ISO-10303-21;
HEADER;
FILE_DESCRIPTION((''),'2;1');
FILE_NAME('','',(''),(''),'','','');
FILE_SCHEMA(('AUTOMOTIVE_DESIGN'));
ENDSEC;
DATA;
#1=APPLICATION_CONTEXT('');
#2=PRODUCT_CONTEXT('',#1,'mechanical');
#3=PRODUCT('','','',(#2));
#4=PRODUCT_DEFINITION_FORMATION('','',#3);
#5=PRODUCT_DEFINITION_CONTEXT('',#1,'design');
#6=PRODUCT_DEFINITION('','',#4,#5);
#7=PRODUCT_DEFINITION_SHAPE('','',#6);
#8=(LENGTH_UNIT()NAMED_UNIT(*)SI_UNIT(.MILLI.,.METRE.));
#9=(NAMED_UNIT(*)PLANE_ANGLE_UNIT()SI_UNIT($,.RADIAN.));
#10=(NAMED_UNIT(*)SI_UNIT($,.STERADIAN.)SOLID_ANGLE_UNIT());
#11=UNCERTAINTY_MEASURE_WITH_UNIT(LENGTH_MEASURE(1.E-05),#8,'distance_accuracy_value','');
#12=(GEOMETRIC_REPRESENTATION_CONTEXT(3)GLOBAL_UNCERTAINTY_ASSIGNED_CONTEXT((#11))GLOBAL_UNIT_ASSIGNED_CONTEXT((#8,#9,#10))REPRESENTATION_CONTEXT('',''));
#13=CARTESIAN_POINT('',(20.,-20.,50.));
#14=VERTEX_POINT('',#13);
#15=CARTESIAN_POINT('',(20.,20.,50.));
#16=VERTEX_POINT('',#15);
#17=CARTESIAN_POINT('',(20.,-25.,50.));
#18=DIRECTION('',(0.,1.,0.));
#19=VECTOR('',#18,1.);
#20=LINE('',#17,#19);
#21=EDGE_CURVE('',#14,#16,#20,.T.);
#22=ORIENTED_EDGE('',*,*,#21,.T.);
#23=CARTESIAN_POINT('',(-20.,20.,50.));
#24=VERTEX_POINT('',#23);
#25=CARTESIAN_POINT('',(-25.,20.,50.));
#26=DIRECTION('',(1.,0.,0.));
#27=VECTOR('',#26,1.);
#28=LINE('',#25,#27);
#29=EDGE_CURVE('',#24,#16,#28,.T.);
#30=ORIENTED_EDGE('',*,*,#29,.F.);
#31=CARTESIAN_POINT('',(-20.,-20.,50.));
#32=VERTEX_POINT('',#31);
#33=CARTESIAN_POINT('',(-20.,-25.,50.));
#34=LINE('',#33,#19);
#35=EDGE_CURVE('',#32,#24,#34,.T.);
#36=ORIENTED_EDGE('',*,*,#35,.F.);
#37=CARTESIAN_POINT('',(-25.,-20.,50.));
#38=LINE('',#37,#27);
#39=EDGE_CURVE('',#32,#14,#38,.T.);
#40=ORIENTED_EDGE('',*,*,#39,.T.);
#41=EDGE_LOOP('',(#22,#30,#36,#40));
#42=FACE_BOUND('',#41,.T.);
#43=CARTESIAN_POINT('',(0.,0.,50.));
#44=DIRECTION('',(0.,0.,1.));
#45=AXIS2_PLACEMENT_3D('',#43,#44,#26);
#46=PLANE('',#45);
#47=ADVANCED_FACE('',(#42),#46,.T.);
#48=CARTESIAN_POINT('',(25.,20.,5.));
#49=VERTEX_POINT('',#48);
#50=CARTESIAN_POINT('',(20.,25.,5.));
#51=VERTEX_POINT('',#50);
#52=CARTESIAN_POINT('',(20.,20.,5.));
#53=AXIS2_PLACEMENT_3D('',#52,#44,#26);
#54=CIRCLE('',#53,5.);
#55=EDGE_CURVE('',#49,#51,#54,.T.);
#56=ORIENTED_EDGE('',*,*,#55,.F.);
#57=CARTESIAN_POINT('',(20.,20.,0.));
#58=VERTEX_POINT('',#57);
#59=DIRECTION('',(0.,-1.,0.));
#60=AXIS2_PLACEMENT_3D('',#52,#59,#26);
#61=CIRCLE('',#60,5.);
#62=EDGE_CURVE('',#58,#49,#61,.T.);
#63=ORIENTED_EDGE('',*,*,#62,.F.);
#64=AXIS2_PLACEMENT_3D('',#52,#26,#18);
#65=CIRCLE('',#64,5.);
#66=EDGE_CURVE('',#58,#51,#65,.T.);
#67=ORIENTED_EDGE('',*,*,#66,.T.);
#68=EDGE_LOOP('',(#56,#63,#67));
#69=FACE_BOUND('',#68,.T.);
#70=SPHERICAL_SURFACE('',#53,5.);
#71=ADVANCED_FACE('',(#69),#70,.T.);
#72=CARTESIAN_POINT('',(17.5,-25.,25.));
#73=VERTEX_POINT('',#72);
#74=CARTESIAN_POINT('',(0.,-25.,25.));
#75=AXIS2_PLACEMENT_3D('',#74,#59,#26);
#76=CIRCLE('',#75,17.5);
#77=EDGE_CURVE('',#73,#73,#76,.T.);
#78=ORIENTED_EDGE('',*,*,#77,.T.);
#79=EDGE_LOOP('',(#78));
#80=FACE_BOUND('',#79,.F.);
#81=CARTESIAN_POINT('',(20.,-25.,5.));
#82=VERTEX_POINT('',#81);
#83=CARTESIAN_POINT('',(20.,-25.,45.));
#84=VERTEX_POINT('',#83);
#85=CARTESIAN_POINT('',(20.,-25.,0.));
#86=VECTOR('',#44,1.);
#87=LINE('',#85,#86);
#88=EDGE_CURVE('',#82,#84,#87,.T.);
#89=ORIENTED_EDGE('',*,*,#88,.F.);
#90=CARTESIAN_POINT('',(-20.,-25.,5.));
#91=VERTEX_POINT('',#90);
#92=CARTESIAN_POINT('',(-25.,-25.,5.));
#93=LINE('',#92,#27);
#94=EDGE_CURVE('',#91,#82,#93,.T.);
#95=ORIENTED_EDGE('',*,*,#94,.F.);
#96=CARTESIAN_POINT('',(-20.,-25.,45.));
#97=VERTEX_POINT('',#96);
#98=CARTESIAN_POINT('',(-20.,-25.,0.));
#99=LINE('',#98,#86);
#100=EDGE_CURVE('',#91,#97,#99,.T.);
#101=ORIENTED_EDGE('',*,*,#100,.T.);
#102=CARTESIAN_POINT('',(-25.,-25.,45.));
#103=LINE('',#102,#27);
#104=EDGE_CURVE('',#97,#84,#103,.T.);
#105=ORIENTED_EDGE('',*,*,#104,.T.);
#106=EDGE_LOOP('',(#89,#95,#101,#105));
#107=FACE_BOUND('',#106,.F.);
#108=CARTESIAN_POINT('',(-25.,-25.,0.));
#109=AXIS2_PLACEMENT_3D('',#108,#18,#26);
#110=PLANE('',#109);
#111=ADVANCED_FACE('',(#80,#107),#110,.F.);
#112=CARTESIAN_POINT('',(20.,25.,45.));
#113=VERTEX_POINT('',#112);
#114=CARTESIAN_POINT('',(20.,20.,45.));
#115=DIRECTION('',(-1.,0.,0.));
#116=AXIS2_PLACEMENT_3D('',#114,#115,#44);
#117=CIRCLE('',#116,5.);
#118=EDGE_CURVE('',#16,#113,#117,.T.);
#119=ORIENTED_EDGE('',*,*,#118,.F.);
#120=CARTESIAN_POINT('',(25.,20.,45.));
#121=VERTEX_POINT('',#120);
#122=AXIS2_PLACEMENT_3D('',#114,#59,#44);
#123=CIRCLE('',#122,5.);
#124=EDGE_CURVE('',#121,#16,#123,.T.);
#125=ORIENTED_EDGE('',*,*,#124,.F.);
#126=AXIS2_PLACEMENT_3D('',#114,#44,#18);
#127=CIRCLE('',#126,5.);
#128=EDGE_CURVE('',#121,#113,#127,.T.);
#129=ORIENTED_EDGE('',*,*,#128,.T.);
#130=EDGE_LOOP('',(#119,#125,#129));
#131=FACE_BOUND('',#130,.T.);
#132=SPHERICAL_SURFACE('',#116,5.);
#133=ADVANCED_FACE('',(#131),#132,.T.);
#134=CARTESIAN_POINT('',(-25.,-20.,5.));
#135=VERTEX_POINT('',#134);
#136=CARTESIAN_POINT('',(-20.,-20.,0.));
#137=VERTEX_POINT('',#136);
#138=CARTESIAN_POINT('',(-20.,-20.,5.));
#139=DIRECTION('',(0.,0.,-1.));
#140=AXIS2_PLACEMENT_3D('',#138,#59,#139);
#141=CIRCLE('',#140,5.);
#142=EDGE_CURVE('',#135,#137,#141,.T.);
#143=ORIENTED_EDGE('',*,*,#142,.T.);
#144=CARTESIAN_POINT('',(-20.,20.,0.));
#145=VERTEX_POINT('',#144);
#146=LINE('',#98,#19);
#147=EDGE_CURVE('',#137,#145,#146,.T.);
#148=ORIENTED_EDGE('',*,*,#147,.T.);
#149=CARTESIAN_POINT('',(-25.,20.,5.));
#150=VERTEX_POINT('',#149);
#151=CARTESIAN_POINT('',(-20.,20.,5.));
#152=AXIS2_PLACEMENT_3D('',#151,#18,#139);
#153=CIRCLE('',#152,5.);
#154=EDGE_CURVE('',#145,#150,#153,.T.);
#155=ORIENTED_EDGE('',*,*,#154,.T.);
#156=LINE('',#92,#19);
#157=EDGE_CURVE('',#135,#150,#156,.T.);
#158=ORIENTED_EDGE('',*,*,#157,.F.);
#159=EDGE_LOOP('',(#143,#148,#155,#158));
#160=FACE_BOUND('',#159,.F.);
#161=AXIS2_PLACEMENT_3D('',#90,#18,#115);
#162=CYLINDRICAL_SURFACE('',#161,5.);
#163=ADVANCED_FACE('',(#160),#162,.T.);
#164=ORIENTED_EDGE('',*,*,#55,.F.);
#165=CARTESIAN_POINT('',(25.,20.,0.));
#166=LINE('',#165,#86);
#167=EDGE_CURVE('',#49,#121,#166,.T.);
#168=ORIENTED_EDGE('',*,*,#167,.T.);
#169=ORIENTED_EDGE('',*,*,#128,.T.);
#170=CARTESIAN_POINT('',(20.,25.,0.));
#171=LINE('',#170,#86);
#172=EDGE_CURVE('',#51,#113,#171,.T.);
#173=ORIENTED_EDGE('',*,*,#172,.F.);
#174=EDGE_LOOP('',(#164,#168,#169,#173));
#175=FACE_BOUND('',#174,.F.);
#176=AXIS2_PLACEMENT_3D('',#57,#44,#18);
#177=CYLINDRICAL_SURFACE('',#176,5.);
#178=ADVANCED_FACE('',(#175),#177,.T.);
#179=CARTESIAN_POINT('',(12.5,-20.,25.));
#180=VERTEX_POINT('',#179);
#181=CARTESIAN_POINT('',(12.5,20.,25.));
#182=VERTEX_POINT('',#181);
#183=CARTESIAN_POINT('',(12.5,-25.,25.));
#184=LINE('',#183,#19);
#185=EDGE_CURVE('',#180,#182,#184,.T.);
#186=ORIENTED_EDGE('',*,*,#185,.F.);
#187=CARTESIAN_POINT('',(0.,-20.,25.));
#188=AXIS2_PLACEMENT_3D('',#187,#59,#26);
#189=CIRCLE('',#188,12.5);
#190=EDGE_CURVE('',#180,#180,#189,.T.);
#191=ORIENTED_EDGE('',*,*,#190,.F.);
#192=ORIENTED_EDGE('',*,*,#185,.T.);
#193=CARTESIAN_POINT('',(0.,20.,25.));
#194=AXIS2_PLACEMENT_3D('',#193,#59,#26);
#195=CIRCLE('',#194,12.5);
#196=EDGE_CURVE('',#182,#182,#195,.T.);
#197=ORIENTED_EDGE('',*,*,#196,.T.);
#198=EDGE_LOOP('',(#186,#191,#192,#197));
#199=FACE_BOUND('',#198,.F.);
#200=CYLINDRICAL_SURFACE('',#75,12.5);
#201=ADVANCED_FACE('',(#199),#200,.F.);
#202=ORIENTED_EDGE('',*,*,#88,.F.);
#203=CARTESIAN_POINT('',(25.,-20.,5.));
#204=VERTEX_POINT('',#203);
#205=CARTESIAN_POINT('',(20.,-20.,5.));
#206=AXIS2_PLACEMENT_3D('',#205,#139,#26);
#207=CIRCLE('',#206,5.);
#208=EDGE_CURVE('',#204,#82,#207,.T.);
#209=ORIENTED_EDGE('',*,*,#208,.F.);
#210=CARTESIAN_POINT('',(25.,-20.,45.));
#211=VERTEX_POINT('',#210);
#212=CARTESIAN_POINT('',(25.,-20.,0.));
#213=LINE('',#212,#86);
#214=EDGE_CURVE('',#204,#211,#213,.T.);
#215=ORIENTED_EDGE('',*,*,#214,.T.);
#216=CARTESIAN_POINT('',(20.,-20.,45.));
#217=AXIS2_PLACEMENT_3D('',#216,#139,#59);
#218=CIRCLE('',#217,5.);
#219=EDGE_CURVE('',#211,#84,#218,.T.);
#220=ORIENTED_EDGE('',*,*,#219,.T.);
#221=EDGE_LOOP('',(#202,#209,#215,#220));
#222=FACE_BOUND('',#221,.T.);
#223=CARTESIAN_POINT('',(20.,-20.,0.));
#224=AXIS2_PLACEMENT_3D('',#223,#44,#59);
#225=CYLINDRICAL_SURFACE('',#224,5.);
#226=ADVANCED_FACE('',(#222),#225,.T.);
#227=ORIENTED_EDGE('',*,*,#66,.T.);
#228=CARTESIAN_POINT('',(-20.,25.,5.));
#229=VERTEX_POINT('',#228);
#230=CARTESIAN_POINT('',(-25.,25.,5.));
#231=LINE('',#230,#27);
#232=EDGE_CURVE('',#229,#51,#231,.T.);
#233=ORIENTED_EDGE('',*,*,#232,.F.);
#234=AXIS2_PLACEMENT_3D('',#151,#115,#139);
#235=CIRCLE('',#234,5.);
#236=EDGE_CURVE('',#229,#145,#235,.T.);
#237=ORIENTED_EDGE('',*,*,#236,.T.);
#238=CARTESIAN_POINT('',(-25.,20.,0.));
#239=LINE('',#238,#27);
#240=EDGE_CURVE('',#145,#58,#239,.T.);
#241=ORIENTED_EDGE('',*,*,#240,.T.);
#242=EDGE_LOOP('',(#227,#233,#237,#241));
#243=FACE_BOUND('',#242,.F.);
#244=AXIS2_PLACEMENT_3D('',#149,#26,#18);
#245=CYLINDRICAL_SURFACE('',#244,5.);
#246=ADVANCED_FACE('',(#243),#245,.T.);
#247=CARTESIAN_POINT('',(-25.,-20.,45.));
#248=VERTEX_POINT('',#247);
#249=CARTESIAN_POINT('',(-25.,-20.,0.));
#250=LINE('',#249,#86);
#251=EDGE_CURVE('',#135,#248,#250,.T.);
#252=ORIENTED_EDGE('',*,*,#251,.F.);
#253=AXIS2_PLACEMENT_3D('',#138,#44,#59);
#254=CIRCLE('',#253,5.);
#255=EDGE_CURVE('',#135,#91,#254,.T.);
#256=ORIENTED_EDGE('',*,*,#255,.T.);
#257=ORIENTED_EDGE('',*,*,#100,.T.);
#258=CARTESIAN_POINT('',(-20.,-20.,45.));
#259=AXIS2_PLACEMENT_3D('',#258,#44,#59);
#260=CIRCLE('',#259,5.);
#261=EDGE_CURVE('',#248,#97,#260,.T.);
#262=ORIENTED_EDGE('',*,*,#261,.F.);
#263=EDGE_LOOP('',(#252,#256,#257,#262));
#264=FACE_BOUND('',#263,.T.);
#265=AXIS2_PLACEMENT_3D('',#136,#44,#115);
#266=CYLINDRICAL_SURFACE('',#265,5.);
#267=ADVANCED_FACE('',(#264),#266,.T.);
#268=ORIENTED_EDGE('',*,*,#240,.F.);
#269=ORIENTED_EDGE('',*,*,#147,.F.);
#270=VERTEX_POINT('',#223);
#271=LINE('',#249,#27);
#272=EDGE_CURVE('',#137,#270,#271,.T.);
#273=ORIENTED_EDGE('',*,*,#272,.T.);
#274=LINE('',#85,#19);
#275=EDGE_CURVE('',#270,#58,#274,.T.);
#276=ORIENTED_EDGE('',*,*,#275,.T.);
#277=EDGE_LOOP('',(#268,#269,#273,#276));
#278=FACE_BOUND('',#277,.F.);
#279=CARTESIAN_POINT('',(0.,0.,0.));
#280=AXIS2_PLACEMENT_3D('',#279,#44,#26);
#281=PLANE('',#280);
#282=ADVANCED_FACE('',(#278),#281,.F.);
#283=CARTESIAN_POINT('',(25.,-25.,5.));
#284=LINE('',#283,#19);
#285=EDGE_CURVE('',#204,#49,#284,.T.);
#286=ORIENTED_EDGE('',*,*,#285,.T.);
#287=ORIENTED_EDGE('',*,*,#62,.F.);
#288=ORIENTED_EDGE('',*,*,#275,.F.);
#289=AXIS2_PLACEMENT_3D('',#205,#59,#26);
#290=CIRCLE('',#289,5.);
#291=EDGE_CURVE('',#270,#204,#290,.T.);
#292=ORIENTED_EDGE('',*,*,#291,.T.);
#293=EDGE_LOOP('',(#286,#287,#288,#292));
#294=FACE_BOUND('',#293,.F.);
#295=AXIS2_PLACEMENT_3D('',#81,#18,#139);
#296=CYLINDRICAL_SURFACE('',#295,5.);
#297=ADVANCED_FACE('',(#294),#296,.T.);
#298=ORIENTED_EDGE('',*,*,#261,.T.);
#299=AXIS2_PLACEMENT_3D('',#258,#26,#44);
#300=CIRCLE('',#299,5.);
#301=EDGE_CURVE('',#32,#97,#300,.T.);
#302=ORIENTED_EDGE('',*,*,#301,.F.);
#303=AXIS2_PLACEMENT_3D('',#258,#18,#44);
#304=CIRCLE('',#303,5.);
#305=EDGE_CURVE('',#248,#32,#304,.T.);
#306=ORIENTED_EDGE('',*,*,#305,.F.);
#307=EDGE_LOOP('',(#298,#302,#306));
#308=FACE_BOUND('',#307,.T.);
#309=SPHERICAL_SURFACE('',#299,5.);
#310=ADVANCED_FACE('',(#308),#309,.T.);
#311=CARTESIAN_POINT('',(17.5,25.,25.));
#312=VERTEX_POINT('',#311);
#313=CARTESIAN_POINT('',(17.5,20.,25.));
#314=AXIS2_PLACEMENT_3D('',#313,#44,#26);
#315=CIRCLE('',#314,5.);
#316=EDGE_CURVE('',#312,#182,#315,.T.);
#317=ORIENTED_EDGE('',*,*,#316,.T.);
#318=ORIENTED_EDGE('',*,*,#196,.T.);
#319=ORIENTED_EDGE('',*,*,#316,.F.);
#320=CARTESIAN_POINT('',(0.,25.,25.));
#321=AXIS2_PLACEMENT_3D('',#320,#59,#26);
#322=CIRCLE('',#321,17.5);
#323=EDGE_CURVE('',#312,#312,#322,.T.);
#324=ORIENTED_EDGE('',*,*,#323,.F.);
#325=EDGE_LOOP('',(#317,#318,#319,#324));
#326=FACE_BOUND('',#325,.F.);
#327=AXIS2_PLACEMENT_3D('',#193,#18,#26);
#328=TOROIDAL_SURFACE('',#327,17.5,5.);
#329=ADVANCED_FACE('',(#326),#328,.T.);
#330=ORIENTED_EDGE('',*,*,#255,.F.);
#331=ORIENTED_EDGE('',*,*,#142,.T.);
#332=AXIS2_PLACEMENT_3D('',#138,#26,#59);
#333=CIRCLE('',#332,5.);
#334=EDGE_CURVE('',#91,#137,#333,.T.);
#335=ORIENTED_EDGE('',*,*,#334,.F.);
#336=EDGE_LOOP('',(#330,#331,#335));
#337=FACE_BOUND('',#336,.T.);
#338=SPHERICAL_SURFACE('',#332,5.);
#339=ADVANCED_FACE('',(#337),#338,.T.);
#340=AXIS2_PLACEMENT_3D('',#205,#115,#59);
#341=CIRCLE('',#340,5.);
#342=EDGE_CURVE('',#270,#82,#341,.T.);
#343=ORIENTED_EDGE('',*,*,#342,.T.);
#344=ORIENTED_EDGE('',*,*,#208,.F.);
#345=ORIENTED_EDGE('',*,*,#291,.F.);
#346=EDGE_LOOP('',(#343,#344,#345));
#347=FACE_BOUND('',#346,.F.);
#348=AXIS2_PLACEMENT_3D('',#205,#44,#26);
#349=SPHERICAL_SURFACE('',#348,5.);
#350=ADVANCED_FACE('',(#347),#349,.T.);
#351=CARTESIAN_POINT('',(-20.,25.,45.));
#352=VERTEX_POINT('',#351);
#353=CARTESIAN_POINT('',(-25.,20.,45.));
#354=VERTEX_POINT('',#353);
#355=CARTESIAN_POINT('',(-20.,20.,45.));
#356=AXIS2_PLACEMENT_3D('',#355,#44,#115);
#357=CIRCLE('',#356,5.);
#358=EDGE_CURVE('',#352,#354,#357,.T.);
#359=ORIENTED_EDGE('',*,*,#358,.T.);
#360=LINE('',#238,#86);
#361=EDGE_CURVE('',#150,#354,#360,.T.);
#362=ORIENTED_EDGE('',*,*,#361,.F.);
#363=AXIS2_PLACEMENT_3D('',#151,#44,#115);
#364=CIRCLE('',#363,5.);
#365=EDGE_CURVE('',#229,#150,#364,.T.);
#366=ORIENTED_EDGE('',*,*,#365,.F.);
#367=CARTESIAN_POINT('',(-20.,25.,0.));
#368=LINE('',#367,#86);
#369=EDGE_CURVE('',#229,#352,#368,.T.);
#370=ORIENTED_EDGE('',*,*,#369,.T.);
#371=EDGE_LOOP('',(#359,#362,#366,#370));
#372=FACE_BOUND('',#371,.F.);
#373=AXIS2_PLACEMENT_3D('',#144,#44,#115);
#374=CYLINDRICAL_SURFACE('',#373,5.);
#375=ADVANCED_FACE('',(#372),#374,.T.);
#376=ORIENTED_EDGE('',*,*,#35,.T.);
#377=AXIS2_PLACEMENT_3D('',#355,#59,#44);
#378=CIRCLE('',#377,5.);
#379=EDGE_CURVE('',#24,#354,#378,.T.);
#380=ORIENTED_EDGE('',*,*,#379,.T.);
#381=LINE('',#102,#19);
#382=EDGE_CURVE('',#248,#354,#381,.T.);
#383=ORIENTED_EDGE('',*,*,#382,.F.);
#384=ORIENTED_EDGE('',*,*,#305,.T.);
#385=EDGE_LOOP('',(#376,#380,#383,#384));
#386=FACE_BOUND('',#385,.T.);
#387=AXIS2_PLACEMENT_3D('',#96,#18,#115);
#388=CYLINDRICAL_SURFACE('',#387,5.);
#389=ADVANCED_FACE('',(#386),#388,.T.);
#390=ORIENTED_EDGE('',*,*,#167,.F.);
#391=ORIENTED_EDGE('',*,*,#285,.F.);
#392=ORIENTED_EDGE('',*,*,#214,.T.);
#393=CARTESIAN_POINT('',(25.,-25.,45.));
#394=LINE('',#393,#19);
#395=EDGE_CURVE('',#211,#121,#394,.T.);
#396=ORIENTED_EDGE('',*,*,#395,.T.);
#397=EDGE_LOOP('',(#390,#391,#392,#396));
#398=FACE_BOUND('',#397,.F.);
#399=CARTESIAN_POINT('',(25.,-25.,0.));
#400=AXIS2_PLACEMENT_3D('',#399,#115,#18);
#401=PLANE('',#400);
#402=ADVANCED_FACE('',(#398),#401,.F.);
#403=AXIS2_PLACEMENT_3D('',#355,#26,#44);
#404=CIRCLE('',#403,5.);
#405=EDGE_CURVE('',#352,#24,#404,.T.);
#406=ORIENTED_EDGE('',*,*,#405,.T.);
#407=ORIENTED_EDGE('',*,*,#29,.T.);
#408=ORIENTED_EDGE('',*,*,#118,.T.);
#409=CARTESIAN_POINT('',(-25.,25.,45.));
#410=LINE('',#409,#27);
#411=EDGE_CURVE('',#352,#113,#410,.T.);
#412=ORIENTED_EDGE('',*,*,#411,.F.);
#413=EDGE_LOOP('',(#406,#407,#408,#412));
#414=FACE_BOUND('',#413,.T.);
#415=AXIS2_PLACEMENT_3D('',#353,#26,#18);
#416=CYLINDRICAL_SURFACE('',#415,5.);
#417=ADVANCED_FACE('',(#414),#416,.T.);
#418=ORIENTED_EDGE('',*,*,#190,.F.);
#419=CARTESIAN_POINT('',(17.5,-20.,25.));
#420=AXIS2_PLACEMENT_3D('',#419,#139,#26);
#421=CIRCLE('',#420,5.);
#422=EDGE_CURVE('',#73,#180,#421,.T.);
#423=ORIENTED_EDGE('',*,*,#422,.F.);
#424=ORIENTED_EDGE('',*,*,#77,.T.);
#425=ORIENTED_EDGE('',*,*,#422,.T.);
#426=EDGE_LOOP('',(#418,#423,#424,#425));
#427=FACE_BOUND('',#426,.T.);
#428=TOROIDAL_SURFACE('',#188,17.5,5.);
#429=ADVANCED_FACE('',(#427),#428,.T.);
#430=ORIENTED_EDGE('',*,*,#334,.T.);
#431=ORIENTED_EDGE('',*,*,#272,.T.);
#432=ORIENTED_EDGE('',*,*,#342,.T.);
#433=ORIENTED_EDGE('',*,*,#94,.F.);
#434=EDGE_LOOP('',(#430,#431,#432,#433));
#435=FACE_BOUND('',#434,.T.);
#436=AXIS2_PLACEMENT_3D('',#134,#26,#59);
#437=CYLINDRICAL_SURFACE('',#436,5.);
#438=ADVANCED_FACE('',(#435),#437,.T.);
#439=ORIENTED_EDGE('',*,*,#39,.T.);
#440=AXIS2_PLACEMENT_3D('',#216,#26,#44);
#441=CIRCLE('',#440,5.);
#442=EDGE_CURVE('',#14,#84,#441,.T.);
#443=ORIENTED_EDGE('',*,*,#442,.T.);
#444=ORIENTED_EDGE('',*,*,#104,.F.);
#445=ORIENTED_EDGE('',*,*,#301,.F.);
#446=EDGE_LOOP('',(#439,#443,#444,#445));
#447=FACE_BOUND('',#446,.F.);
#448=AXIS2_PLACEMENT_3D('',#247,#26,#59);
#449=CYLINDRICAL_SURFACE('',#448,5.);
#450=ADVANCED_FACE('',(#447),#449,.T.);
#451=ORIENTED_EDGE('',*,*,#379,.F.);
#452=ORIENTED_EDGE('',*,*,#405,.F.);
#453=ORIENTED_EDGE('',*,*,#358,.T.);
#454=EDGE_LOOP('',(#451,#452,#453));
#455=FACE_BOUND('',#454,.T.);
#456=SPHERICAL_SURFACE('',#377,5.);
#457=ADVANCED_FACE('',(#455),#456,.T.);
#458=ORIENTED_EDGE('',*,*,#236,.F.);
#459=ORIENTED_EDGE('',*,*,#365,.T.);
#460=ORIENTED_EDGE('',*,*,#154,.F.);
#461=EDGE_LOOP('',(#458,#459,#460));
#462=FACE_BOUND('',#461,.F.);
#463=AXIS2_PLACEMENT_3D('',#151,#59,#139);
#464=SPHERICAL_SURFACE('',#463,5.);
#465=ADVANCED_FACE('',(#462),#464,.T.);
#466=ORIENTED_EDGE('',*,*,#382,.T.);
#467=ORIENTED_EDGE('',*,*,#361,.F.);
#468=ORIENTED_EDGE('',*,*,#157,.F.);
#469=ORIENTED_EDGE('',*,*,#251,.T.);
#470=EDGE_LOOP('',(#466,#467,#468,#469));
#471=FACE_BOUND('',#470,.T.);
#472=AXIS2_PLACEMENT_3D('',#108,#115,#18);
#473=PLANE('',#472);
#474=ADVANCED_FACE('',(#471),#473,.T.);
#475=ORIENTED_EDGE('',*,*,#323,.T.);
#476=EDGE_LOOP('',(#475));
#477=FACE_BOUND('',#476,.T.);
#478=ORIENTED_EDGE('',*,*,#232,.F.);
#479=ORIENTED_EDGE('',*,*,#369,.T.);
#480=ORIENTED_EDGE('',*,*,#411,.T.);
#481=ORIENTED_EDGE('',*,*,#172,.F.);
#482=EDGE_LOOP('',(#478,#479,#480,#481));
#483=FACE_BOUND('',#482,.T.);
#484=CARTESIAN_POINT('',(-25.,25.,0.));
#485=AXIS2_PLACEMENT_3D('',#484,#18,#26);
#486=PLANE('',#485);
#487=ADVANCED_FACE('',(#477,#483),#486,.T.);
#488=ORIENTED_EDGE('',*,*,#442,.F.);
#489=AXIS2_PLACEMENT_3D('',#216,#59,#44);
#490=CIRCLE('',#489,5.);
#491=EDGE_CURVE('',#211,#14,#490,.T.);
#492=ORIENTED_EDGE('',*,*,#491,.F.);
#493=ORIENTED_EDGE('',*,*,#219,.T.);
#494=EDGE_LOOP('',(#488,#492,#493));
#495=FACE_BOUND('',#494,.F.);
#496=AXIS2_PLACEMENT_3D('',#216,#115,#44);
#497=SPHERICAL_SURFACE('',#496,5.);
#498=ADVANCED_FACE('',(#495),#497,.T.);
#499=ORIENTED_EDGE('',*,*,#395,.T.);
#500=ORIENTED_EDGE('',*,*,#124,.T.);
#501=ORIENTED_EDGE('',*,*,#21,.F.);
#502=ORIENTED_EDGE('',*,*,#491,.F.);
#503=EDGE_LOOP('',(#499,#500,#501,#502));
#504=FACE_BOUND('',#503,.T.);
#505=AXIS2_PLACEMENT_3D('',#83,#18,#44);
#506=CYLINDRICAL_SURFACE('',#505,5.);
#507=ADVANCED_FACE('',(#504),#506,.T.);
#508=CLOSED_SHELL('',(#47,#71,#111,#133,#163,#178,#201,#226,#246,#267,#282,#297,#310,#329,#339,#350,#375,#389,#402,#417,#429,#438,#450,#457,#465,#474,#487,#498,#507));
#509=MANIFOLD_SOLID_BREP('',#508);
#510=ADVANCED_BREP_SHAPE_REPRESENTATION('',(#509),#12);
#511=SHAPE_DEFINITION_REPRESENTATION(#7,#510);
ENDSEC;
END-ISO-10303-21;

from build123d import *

# Parameters (mm, degrees)
F0_W     = 50
F0_H     = 50
F1_DEPTH = 50
F2_R     = 12.5
F3_DEPTH = 50.001
F4_R     = 5
F5_R     = 5


with BuildPart() as f1:
    # F0 (on Top) → F1 (new body)
    with BuildSketch(Plane.XY):
        Rectangle(F0_W, F0_H)
    extrude(amount=F1_DEPTH)

    # F2 (on face) → F3 (cut, through all)
    with BuildSketch(Plane.XZ.offset(25)):
        with Locations((0, 25)):
            Circle(F2_R)
    extrude(amount=-F3_DEPTH, mode=Mode.SUBTRACT)

    # F4
    f4_edges = [f1.edges().sort_by_distance(p)[0] for p in [
        (0, -25, 50),
        (-25, 0, 50),
        (0, 25, 50),
        (25, 0, 50),
        (25, 25, 25),
        (25, -25, 25),
        (25, 0, 0),
        (0, -25, 0),
        (-25, -25, 25),
        (-25, 0, 0),
        (0, 25, 0),
        (-25, 25, 25),
    ]]
    fillet(f4_edges, radius=F4_R)

    # F5
    f5_edges = [f1.edges().sort_by_distance(p)[0] for p in [
        (-12.5, -25, 25),
        (25, 0, 5),
        (20, 0, 0),
        (0, 20, 0),
        (-12.5, 25, 25),
    ]]
    fillet(f5_edges, radius=F5_R)


solid = f1.part
